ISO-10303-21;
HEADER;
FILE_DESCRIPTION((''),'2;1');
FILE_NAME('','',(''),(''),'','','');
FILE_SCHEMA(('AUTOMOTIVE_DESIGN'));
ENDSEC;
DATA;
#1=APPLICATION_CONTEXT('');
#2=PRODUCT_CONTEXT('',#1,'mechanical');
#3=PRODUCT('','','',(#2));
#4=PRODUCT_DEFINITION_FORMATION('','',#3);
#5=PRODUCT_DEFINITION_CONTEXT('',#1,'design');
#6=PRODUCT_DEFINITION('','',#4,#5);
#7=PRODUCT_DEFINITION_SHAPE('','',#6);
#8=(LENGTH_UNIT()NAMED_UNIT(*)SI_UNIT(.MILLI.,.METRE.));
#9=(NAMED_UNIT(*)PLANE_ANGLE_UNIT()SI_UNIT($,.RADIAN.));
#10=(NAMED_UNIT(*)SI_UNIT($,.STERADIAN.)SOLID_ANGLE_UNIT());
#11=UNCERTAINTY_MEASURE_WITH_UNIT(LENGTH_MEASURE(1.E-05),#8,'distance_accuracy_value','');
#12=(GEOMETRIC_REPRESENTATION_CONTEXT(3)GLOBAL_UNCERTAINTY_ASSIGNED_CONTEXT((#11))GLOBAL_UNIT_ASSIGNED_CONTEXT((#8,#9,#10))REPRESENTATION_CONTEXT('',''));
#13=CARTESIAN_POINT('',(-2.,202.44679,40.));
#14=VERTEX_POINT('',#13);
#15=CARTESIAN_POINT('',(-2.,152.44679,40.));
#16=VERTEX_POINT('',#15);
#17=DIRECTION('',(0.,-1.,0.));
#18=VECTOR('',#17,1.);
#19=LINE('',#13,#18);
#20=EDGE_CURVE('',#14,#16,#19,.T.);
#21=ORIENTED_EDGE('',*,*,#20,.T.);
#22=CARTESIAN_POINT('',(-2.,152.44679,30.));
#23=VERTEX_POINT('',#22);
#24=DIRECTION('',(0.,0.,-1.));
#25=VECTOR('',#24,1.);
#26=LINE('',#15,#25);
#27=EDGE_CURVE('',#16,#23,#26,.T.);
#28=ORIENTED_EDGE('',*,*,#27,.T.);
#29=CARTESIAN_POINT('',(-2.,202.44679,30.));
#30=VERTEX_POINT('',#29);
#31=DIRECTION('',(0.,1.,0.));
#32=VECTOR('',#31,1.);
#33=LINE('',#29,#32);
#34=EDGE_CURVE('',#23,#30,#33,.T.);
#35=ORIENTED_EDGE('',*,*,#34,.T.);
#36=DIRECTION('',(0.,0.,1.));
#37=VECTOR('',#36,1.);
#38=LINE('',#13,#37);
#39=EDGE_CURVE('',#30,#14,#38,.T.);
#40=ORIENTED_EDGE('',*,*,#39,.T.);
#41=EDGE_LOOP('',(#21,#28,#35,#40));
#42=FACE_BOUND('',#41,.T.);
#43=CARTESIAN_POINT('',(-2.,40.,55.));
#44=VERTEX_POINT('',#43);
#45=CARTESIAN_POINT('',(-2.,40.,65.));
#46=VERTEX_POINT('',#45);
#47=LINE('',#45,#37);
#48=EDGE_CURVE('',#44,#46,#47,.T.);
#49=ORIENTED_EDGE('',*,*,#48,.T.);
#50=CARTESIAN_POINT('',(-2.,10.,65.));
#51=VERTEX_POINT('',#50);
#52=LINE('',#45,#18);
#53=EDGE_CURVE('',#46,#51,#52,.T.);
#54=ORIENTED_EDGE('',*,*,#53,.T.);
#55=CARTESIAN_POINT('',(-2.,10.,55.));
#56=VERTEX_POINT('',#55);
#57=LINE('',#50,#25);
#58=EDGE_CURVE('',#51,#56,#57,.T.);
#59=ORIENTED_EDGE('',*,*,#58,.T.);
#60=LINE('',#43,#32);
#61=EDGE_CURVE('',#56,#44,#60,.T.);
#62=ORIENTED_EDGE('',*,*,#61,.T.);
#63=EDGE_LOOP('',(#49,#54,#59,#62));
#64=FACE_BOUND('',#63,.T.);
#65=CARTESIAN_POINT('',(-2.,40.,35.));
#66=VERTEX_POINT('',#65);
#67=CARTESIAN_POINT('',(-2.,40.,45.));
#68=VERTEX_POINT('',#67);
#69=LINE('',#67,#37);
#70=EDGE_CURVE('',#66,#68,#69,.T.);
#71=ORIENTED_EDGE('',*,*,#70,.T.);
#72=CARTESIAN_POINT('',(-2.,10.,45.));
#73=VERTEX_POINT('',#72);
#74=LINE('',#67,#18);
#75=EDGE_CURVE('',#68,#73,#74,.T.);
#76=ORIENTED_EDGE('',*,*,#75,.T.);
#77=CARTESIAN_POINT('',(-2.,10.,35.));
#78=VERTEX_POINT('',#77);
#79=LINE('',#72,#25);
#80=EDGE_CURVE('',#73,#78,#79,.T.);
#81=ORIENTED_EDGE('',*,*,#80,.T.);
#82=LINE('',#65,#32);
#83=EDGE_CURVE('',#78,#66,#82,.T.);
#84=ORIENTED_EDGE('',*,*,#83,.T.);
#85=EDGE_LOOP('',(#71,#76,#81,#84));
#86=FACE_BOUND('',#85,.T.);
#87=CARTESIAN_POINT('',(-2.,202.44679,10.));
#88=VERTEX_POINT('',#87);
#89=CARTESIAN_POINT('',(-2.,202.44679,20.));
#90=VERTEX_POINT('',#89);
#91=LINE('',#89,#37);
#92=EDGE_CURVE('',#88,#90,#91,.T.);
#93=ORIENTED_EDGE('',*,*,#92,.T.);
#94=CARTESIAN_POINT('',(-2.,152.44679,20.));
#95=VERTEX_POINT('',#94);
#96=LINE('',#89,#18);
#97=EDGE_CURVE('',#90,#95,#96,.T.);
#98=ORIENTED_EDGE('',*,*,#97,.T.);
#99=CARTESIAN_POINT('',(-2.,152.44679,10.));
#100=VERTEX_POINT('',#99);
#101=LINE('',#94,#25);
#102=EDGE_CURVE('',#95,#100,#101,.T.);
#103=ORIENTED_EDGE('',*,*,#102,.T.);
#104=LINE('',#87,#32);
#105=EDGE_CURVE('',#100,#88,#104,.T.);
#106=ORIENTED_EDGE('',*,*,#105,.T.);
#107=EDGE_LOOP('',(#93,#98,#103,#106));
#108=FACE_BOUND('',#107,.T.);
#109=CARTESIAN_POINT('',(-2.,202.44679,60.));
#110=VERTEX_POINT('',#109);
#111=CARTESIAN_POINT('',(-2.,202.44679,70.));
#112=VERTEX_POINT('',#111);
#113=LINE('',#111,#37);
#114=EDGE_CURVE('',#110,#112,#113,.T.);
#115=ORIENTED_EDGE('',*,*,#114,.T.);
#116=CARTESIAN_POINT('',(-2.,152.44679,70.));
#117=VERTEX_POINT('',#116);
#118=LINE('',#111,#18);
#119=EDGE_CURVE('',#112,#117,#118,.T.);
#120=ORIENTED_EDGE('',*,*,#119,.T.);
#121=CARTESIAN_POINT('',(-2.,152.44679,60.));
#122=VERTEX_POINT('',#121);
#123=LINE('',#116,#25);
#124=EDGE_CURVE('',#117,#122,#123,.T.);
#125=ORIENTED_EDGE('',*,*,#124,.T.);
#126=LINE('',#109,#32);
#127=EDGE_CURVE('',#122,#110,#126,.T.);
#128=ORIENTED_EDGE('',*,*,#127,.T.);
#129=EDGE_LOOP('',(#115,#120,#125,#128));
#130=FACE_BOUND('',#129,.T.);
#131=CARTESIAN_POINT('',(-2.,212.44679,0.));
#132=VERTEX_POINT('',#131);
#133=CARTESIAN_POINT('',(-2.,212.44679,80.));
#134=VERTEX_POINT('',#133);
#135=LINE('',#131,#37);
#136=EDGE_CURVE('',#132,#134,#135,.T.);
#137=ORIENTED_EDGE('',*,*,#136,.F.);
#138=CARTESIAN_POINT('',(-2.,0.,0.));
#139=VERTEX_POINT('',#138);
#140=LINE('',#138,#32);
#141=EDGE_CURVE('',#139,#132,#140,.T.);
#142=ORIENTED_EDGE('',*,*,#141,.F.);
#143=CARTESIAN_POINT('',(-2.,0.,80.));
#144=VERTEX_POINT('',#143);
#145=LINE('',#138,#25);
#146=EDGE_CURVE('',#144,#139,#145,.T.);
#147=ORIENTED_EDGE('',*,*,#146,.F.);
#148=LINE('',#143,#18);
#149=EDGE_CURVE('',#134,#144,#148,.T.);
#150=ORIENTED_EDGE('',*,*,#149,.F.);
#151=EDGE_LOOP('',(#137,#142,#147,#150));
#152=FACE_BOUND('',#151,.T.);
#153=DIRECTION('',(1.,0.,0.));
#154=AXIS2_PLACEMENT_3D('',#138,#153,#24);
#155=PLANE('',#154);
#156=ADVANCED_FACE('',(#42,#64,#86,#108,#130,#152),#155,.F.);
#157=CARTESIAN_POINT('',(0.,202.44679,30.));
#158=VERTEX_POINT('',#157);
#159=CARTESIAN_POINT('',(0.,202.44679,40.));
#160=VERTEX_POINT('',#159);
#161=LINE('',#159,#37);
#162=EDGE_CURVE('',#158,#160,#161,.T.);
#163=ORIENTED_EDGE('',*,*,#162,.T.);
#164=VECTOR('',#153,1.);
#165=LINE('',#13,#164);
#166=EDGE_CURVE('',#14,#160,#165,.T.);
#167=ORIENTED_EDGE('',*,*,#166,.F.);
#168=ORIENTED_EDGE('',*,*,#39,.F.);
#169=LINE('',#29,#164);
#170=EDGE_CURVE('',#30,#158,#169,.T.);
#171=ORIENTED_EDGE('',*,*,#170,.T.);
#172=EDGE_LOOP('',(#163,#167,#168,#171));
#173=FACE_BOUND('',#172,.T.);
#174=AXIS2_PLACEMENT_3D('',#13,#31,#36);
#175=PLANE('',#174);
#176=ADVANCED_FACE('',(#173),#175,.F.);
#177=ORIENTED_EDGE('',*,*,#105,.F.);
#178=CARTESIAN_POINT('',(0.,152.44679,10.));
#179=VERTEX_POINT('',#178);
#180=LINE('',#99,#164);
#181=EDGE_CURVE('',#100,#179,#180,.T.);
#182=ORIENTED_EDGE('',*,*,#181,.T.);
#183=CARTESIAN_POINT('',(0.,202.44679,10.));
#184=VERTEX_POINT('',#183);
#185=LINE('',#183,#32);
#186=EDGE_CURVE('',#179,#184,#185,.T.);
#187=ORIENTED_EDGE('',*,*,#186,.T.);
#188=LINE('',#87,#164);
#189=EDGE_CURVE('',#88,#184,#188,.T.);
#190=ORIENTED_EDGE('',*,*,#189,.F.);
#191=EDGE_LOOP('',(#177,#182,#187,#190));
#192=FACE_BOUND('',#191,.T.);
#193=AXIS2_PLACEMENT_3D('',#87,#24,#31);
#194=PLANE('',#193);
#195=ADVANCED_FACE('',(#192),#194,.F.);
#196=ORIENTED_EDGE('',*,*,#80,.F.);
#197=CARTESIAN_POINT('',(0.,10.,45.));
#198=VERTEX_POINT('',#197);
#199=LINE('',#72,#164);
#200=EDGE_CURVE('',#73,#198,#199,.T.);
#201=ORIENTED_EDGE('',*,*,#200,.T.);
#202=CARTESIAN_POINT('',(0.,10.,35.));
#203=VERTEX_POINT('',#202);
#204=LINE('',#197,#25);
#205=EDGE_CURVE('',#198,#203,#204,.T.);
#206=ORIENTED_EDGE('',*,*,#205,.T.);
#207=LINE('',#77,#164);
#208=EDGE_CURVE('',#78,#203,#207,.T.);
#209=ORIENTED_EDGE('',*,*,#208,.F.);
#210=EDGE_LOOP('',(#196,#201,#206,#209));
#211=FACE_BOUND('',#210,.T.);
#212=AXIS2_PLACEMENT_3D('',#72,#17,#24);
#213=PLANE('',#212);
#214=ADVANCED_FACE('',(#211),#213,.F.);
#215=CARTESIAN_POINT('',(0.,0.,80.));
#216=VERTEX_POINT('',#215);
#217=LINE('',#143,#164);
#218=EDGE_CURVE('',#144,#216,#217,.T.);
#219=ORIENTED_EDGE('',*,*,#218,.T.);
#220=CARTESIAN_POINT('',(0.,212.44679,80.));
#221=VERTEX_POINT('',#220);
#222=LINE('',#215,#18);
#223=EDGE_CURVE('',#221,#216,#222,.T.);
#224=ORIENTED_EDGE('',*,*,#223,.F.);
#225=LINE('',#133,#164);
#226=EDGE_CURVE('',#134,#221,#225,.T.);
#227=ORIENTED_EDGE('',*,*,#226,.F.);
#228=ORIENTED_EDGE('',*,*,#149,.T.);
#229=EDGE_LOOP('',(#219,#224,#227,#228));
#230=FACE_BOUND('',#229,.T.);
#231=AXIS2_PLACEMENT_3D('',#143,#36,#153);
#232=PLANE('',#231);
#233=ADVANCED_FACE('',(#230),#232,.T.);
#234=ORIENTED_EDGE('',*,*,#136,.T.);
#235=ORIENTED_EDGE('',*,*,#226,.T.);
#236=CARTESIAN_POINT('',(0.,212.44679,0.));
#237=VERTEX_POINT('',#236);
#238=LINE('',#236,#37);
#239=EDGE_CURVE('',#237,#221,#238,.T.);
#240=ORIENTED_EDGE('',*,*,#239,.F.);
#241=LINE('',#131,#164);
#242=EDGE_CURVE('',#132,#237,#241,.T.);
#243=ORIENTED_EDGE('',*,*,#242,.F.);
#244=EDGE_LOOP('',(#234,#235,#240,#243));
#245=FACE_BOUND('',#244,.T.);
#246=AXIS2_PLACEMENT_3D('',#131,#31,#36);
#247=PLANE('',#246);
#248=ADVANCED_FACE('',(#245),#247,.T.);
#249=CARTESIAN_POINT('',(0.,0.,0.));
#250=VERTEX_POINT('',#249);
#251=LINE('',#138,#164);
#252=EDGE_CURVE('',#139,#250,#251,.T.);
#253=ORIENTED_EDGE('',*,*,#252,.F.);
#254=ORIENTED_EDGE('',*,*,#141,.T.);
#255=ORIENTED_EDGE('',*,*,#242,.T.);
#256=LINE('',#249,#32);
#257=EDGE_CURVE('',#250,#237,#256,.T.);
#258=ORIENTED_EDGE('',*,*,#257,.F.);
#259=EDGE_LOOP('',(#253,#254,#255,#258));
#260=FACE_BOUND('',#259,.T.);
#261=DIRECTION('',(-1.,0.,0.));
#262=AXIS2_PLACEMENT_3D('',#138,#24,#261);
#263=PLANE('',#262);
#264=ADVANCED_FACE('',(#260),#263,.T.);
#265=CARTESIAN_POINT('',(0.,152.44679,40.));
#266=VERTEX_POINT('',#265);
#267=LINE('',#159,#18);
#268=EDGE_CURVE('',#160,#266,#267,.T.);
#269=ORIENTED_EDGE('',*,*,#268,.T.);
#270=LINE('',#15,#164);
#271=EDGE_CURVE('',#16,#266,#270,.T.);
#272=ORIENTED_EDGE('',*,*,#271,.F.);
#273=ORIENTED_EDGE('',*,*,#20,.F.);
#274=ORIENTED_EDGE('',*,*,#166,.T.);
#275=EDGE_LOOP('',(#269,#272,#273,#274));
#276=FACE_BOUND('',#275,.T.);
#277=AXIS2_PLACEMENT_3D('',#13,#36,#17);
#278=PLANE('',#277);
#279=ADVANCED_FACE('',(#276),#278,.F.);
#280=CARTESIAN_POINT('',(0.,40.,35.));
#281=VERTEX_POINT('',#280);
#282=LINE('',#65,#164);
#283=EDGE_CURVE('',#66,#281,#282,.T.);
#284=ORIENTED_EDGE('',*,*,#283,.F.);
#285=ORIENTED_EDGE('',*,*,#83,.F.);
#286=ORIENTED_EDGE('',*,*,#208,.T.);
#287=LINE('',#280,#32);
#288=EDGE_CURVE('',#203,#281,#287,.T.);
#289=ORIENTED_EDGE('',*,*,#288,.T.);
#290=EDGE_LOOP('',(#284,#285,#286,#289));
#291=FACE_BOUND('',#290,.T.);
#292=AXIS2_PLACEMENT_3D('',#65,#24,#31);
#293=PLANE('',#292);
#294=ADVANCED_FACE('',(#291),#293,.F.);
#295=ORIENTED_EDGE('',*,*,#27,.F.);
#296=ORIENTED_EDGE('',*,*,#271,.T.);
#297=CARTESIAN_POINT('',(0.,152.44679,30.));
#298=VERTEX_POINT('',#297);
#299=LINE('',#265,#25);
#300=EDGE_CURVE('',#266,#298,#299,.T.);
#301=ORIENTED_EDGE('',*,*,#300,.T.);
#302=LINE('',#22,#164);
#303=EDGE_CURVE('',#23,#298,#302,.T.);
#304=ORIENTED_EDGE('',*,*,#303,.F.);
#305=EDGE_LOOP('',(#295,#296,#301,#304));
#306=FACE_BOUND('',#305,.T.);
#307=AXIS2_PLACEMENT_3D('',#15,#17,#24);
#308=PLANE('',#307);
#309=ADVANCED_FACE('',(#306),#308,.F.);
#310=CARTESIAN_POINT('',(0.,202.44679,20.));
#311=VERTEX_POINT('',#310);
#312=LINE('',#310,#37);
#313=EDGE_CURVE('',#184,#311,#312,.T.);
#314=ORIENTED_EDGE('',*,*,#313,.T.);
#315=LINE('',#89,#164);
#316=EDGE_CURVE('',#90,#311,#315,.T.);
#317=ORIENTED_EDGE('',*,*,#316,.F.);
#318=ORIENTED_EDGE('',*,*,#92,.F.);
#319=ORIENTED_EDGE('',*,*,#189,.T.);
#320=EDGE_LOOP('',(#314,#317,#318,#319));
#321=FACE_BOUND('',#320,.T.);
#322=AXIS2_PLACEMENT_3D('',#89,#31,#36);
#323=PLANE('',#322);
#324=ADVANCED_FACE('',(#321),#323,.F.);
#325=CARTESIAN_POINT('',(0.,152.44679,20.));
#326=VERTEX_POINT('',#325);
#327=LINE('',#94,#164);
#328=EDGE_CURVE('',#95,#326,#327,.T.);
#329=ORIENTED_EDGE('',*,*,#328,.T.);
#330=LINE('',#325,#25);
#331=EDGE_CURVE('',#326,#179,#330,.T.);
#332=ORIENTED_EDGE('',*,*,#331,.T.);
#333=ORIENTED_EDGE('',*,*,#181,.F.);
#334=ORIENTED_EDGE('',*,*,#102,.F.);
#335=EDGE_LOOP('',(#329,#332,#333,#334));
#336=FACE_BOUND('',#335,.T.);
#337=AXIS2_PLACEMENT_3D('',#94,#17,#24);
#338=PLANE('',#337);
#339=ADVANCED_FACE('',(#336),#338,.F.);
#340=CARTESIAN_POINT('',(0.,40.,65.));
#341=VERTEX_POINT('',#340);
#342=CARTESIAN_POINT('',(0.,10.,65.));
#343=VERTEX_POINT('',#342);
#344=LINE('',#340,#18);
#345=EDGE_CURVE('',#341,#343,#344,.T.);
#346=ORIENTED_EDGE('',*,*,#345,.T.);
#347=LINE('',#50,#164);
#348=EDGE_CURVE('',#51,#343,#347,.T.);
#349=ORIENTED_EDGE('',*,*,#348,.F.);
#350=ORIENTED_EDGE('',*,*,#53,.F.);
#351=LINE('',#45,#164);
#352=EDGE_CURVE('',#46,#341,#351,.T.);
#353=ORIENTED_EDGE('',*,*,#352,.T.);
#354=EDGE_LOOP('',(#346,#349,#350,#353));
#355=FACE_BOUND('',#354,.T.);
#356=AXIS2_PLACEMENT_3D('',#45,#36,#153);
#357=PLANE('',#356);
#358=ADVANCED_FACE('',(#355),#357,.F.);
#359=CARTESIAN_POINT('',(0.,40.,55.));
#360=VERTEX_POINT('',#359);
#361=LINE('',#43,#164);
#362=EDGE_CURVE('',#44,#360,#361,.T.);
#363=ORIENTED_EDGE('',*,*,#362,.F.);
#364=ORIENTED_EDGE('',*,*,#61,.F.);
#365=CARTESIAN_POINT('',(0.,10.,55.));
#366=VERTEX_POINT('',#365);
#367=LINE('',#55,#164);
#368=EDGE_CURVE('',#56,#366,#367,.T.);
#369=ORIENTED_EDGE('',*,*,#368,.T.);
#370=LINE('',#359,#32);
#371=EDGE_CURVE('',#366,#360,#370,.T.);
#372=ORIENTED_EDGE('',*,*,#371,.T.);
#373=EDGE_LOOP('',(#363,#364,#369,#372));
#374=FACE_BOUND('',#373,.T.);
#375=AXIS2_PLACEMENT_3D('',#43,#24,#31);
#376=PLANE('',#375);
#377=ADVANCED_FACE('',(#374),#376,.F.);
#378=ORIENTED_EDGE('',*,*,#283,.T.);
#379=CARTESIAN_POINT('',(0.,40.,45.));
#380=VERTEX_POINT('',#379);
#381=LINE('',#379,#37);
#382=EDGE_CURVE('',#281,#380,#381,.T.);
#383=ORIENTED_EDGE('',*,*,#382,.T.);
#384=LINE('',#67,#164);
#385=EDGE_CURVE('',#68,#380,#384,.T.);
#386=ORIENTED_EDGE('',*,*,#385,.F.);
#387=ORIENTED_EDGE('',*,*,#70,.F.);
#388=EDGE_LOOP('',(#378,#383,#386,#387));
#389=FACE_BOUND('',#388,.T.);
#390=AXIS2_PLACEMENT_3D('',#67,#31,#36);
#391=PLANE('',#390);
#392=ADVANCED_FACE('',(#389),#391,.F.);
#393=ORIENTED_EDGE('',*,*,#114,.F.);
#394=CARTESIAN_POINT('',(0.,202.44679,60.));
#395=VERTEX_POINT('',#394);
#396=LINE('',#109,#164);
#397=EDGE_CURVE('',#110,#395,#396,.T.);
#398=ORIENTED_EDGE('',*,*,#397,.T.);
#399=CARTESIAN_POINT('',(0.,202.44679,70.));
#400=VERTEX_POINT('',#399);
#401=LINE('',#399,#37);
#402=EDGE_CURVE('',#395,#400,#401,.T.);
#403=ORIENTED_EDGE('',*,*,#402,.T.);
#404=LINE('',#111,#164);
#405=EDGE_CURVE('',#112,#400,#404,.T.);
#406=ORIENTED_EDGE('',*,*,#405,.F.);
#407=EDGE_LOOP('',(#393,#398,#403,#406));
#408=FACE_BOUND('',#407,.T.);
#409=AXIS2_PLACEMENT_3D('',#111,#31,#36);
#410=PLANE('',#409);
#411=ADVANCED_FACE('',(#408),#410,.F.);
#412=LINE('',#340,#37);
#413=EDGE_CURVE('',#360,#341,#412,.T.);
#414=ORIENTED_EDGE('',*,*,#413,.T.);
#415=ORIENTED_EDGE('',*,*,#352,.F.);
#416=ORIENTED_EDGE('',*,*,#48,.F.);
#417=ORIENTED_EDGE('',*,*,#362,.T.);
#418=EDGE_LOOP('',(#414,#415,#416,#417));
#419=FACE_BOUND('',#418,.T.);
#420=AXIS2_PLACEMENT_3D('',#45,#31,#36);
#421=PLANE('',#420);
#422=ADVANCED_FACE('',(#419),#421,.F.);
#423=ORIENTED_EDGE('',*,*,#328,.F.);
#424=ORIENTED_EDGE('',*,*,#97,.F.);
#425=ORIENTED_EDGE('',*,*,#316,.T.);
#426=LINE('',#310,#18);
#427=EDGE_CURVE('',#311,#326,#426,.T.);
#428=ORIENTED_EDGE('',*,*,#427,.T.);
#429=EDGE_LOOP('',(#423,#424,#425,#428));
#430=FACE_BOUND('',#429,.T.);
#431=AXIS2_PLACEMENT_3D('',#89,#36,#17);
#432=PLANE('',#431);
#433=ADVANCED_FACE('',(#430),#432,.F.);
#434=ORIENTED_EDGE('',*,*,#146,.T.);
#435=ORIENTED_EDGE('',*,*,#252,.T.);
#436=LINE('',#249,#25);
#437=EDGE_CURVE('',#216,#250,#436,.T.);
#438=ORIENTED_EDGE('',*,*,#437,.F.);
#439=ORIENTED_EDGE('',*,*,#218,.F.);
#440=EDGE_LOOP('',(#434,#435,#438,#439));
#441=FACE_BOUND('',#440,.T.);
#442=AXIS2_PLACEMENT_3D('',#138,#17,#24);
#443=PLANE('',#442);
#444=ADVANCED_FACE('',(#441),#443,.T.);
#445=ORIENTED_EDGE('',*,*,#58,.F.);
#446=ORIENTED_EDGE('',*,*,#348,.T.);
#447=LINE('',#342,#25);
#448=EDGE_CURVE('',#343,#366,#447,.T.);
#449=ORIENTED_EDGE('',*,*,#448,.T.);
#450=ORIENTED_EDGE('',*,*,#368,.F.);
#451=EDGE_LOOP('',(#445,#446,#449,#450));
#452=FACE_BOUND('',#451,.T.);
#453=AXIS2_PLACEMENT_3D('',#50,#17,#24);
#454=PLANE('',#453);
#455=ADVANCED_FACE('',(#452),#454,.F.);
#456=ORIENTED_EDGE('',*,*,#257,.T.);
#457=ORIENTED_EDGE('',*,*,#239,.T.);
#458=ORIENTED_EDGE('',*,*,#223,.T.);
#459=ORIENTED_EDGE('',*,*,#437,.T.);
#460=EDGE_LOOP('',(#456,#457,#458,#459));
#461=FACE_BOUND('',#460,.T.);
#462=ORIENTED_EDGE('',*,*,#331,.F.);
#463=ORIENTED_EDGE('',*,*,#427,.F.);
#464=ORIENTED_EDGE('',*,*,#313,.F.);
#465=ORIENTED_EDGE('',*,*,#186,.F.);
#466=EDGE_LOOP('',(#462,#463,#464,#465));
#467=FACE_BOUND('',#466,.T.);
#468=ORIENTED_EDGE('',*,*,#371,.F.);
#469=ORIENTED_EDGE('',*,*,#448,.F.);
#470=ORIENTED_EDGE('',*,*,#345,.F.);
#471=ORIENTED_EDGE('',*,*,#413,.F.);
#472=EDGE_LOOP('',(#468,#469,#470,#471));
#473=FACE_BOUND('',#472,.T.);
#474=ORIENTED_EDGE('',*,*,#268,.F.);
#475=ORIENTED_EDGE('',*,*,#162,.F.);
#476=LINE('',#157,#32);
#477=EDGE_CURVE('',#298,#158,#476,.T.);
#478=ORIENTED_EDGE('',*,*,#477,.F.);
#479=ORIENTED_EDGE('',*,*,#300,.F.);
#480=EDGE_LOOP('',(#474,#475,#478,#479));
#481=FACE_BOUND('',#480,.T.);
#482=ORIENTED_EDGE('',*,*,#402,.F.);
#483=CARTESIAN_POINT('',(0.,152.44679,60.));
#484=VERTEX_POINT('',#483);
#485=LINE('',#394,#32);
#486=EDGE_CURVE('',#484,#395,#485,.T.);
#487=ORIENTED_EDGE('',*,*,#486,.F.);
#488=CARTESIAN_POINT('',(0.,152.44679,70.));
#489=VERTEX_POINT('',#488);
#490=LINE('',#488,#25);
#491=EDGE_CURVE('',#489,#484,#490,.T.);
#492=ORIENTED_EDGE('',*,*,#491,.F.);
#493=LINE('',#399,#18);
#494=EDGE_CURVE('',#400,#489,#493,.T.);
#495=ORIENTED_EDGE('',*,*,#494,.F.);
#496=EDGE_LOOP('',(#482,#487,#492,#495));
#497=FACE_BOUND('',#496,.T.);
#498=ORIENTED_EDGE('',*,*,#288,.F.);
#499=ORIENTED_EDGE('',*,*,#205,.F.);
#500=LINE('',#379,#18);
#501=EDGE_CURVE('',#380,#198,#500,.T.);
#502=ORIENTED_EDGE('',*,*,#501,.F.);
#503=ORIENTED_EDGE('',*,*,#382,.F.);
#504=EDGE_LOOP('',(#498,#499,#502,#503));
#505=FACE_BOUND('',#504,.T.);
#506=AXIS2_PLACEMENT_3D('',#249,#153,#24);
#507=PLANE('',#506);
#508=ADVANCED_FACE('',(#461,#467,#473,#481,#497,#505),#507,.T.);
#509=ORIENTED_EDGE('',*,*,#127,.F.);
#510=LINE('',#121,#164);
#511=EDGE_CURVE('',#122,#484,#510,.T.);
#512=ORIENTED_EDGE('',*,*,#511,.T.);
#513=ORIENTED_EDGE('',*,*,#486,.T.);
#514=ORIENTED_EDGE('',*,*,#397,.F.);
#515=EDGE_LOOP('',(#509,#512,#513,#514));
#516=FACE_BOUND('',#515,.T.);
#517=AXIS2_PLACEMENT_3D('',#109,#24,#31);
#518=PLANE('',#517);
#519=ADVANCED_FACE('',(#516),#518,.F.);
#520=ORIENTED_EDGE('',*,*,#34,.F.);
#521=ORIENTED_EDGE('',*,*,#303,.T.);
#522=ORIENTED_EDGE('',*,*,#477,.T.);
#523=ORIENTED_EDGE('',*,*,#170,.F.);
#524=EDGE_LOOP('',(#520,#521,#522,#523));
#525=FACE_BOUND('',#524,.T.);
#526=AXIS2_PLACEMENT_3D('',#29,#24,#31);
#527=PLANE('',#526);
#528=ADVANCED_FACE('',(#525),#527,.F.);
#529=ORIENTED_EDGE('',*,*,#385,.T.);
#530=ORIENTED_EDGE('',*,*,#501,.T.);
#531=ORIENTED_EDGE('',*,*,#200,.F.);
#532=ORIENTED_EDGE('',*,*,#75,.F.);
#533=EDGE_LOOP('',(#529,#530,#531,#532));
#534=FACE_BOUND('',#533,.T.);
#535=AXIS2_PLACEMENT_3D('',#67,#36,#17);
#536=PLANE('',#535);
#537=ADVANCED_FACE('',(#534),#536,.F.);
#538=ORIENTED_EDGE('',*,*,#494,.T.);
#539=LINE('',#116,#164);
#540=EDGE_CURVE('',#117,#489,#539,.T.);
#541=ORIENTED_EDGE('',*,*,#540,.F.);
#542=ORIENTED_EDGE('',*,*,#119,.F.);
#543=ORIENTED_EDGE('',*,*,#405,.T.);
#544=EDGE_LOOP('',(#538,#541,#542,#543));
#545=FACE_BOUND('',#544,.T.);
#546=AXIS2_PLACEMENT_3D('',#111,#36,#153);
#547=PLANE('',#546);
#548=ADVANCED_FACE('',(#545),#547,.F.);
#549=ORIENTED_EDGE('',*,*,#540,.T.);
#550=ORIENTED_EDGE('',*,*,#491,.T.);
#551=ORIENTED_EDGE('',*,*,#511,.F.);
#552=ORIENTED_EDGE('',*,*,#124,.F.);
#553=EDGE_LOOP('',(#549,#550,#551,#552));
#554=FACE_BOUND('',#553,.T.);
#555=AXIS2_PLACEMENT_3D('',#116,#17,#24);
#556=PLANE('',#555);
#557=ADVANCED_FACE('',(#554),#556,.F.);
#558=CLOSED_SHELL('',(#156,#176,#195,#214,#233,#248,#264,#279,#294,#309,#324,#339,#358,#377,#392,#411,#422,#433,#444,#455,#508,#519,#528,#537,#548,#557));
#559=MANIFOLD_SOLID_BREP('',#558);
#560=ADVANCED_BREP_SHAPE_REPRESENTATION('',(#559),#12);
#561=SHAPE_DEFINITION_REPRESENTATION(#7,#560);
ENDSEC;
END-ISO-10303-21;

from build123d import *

# Parameters (mm, degrees)
SKETCH1_W          = 80
SKETCH1_H          = 212.4467896
SKETCH1_W_2        = 10
SKETCH1_H_2        = 50
SKETCH1_H_3        = 30
BASE_FLANGE1_DEPTH = 2


# Sheet-metal steps are written as plain solids
with BuildPart() as part:
    # Sketch1 → Base-Flange1 (new body)
    with BuildSketch(Plane(origin=(0, 0, 0), x_dir=(0, 0, -1), z_dir=(1, 0, 0))):
        with Locations((-40, 106.2233948)):
            Rectangle(SKETCH1_W, SKETCH1_H)
        with Locations((-65, 177.4467896)):
            Rectangle(SKETCH1_W_2, SKETCH1_H_2, mode=Mode.SUBTRACT)
        with Locations((-35, 177.4467896)):
            Rectangle(SKETCH1_W_2, SKETCH1_H_2, mode=Mode.SUBTRACT)
        with Locations((-15, 177.4467896)):
            Rectangle(SKETCH1_W_2, SKETCH1_H_2, mode=Mode.SUBTRACT)
        with Locations((-60, 25)):
            Rectangle(SKETCH1_W_2, SKETCH1_H_3, mode=Mode.SUBTRACT)
        with Locations((-40, 25)):
            Rectangle(SKETCH1_W_2, SKETCH1_H_3, mode=Mode.SUBTRACT)
    extrude(amount=-BASE_FLANGE1_DEPTH)


solid = part.part
